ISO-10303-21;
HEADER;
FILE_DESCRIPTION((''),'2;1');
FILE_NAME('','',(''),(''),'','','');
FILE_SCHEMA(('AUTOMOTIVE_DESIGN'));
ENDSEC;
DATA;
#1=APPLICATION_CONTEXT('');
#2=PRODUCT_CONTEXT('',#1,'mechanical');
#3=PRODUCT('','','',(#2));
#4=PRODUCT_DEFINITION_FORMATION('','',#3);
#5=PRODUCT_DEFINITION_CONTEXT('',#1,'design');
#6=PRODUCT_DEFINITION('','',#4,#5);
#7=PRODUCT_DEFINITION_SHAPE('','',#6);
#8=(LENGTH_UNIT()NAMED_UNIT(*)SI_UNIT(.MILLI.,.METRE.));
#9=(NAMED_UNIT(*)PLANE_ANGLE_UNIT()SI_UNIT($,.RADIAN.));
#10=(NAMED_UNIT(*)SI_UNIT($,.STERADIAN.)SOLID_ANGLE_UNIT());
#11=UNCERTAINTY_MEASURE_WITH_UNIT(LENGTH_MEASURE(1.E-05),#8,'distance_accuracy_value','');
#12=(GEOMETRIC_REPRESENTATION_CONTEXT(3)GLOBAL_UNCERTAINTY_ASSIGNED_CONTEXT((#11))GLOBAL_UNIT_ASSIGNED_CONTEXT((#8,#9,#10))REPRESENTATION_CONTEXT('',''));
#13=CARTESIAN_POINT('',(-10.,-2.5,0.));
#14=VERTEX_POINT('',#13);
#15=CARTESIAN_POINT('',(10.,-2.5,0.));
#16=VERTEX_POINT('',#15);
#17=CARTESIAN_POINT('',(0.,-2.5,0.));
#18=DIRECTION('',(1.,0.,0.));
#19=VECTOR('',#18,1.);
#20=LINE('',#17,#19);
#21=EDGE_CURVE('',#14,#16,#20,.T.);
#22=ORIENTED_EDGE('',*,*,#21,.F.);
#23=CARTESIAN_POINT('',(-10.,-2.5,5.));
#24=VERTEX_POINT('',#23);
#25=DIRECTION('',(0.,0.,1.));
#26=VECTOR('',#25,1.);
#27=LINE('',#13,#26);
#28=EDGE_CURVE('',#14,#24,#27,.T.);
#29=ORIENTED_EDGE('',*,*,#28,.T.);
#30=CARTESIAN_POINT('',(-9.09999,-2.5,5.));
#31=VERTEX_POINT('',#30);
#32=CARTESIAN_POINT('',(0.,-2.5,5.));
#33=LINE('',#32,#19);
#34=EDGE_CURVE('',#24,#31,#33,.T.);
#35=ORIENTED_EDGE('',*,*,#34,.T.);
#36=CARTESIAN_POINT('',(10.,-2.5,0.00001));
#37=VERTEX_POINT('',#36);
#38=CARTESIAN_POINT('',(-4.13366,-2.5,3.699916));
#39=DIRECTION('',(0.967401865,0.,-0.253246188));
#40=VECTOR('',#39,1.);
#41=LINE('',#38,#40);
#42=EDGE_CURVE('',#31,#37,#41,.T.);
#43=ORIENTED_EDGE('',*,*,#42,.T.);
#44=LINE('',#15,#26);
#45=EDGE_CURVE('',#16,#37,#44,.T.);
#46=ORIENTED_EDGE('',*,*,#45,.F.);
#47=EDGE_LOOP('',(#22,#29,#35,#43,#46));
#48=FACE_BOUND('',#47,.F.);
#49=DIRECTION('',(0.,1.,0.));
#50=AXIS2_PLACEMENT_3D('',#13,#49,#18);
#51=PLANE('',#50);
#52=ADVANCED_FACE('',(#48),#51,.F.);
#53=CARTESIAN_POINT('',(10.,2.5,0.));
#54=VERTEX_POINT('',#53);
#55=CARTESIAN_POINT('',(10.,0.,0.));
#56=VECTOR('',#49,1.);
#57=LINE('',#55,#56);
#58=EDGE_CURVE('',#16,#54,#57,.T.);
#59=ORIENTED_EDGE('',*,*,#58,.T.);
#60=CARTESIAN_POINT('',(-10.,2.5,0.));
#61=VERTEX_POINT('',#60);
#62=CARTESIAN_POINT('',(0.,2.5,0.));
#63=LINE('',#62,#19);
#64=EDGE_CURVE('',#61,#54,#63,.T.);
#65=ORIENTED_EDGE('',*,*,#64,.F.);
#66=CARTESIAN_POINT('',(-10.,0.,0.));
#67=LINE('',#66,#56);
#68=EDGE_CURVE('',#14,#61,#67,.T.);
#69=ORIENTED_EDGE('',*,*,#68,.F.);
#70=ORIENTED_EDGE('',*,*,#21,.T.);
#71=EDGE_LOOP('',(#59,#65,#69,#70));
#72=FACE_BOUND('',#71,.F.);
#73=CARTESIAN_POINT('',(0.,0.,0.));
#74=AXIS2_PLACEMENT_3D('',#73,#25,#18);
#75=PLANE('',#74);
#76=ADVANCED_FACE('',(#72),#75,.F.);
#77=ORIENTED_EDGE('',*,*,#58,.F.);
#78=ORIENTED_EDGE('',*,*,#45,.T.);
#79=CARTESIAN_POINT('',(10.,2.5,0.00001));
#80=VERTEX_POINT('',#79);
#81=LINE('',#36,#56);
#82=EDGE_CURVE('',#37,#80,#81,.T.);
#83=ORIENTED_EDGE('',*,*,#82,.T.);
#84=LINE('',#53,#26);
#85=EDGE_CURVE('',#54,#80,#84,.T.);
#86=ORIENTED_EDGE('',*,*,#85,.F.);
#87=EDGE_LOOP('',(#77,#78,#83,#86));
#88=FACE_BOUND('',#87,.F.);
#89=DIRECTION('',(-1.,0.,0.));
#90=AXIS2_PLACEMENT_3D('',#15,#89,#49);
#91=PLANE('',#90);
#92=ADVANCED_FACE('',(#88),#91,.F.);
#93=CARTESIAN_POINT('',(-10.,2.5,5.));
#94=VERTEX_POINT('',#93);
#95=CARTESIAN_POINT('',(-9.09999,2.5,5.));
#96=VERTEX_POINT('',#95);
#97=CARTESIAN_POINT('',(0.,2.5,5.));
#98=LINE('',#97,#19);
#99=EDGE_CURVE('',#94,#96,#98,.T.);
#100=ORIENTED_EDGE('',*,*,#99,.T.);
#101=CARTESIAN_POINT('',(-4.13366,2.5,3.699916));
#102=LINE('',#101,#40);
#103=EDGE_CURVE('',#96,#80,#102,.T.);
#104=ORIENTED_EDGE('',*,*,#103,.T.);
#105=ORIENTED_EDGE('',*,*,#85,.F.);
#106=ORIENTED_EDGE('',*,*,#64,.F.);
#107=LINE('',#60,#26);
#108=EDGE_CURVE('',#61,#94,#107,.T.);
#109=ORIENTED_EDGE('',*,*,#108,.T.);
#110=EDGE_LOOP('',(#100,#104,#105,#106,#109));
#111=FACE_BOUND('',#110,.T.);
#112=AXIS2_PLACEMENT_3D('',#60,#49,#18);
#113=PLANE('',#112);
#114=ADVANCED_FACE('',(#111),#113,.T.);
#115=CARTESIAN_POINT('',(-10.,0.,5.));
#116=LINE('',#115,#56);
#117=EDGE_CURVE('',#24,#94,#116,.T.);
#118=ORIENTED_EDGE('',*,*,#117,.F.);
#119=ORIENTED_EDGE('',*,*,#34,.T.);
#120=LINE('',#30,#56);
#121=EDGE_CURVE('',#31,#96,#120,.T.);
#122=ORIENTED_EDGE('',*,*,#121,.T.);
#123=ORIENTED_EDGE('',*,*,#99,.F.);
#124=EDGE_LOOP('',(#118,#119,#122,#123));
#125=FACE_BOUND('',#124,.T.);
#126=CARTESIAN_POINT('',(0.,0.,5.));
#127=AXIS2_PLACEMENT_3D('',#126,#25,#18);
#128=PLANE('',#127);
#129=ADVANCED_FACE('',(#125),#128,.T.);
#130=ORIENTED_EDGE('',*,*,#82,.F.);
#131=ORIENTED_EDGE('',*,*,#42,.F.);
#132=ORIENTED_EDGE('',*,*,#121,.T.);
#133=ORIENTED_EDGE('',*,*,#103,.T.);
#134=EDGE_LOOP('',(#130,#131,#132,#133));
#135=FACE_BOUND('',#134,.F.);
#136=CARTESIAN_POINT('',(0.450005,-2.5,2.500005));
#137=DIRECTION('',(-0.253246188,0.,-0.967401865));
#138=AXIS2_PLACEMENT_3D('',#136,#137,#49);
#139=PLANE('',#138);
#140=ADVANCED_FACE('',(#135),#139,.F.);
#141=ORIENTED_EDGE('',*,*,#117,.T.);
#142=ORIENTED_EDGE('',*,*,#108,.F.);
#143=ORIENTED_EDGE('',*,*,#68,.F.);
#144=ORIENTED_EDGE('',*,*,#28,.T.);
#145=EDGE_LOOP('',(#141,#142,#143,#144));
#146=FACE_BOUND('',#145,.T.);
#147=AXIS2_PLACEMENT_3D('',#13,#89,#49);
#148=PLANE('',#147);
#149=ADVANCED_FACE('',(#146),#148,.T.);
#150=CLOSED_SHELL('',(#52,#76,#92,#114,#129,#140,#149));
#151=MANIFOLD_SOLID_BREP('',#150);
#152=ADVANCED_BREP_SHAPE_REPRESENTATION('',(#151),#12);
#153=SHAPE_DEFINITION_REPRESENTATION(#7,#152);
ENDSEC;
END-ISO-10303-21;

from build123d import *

# Parameters (mm, degrees)
F0_W     = 20
F0_H     = 5
F1_DEPTH = 5
F2_SIZE2 = 4.99999
F2_SIZE  = 19.09999


# Not quite as in the source:
# - a fillet or chamfer is up to 0.001 mm smaller than in the source, because OpenCascade refuses the exact size


with BuildPart() as f1:
    # F0 (on Top) → F1 (new body)
    with BuildSketch(Plane.XY):
        Rectangle(F0_W, F0_H)
    extrude(amount=F1_DEPTH)

    # F2 (size 19.1 and 5 in the source; OpenCascade refuses exactly that, so slightly less here)
    f2_edges = [f1.edges().sort_by_distance(p)[0] for p in [
        (10, 0, 5),
    ]]
    f2_side = f1.faces().sort_by_distance((0, 0, 5))[0]
    chamfer(f2_edges, length=F2_SIZE, length2=F2_SIZE2, reference=f2_side)


solid = f1.part
